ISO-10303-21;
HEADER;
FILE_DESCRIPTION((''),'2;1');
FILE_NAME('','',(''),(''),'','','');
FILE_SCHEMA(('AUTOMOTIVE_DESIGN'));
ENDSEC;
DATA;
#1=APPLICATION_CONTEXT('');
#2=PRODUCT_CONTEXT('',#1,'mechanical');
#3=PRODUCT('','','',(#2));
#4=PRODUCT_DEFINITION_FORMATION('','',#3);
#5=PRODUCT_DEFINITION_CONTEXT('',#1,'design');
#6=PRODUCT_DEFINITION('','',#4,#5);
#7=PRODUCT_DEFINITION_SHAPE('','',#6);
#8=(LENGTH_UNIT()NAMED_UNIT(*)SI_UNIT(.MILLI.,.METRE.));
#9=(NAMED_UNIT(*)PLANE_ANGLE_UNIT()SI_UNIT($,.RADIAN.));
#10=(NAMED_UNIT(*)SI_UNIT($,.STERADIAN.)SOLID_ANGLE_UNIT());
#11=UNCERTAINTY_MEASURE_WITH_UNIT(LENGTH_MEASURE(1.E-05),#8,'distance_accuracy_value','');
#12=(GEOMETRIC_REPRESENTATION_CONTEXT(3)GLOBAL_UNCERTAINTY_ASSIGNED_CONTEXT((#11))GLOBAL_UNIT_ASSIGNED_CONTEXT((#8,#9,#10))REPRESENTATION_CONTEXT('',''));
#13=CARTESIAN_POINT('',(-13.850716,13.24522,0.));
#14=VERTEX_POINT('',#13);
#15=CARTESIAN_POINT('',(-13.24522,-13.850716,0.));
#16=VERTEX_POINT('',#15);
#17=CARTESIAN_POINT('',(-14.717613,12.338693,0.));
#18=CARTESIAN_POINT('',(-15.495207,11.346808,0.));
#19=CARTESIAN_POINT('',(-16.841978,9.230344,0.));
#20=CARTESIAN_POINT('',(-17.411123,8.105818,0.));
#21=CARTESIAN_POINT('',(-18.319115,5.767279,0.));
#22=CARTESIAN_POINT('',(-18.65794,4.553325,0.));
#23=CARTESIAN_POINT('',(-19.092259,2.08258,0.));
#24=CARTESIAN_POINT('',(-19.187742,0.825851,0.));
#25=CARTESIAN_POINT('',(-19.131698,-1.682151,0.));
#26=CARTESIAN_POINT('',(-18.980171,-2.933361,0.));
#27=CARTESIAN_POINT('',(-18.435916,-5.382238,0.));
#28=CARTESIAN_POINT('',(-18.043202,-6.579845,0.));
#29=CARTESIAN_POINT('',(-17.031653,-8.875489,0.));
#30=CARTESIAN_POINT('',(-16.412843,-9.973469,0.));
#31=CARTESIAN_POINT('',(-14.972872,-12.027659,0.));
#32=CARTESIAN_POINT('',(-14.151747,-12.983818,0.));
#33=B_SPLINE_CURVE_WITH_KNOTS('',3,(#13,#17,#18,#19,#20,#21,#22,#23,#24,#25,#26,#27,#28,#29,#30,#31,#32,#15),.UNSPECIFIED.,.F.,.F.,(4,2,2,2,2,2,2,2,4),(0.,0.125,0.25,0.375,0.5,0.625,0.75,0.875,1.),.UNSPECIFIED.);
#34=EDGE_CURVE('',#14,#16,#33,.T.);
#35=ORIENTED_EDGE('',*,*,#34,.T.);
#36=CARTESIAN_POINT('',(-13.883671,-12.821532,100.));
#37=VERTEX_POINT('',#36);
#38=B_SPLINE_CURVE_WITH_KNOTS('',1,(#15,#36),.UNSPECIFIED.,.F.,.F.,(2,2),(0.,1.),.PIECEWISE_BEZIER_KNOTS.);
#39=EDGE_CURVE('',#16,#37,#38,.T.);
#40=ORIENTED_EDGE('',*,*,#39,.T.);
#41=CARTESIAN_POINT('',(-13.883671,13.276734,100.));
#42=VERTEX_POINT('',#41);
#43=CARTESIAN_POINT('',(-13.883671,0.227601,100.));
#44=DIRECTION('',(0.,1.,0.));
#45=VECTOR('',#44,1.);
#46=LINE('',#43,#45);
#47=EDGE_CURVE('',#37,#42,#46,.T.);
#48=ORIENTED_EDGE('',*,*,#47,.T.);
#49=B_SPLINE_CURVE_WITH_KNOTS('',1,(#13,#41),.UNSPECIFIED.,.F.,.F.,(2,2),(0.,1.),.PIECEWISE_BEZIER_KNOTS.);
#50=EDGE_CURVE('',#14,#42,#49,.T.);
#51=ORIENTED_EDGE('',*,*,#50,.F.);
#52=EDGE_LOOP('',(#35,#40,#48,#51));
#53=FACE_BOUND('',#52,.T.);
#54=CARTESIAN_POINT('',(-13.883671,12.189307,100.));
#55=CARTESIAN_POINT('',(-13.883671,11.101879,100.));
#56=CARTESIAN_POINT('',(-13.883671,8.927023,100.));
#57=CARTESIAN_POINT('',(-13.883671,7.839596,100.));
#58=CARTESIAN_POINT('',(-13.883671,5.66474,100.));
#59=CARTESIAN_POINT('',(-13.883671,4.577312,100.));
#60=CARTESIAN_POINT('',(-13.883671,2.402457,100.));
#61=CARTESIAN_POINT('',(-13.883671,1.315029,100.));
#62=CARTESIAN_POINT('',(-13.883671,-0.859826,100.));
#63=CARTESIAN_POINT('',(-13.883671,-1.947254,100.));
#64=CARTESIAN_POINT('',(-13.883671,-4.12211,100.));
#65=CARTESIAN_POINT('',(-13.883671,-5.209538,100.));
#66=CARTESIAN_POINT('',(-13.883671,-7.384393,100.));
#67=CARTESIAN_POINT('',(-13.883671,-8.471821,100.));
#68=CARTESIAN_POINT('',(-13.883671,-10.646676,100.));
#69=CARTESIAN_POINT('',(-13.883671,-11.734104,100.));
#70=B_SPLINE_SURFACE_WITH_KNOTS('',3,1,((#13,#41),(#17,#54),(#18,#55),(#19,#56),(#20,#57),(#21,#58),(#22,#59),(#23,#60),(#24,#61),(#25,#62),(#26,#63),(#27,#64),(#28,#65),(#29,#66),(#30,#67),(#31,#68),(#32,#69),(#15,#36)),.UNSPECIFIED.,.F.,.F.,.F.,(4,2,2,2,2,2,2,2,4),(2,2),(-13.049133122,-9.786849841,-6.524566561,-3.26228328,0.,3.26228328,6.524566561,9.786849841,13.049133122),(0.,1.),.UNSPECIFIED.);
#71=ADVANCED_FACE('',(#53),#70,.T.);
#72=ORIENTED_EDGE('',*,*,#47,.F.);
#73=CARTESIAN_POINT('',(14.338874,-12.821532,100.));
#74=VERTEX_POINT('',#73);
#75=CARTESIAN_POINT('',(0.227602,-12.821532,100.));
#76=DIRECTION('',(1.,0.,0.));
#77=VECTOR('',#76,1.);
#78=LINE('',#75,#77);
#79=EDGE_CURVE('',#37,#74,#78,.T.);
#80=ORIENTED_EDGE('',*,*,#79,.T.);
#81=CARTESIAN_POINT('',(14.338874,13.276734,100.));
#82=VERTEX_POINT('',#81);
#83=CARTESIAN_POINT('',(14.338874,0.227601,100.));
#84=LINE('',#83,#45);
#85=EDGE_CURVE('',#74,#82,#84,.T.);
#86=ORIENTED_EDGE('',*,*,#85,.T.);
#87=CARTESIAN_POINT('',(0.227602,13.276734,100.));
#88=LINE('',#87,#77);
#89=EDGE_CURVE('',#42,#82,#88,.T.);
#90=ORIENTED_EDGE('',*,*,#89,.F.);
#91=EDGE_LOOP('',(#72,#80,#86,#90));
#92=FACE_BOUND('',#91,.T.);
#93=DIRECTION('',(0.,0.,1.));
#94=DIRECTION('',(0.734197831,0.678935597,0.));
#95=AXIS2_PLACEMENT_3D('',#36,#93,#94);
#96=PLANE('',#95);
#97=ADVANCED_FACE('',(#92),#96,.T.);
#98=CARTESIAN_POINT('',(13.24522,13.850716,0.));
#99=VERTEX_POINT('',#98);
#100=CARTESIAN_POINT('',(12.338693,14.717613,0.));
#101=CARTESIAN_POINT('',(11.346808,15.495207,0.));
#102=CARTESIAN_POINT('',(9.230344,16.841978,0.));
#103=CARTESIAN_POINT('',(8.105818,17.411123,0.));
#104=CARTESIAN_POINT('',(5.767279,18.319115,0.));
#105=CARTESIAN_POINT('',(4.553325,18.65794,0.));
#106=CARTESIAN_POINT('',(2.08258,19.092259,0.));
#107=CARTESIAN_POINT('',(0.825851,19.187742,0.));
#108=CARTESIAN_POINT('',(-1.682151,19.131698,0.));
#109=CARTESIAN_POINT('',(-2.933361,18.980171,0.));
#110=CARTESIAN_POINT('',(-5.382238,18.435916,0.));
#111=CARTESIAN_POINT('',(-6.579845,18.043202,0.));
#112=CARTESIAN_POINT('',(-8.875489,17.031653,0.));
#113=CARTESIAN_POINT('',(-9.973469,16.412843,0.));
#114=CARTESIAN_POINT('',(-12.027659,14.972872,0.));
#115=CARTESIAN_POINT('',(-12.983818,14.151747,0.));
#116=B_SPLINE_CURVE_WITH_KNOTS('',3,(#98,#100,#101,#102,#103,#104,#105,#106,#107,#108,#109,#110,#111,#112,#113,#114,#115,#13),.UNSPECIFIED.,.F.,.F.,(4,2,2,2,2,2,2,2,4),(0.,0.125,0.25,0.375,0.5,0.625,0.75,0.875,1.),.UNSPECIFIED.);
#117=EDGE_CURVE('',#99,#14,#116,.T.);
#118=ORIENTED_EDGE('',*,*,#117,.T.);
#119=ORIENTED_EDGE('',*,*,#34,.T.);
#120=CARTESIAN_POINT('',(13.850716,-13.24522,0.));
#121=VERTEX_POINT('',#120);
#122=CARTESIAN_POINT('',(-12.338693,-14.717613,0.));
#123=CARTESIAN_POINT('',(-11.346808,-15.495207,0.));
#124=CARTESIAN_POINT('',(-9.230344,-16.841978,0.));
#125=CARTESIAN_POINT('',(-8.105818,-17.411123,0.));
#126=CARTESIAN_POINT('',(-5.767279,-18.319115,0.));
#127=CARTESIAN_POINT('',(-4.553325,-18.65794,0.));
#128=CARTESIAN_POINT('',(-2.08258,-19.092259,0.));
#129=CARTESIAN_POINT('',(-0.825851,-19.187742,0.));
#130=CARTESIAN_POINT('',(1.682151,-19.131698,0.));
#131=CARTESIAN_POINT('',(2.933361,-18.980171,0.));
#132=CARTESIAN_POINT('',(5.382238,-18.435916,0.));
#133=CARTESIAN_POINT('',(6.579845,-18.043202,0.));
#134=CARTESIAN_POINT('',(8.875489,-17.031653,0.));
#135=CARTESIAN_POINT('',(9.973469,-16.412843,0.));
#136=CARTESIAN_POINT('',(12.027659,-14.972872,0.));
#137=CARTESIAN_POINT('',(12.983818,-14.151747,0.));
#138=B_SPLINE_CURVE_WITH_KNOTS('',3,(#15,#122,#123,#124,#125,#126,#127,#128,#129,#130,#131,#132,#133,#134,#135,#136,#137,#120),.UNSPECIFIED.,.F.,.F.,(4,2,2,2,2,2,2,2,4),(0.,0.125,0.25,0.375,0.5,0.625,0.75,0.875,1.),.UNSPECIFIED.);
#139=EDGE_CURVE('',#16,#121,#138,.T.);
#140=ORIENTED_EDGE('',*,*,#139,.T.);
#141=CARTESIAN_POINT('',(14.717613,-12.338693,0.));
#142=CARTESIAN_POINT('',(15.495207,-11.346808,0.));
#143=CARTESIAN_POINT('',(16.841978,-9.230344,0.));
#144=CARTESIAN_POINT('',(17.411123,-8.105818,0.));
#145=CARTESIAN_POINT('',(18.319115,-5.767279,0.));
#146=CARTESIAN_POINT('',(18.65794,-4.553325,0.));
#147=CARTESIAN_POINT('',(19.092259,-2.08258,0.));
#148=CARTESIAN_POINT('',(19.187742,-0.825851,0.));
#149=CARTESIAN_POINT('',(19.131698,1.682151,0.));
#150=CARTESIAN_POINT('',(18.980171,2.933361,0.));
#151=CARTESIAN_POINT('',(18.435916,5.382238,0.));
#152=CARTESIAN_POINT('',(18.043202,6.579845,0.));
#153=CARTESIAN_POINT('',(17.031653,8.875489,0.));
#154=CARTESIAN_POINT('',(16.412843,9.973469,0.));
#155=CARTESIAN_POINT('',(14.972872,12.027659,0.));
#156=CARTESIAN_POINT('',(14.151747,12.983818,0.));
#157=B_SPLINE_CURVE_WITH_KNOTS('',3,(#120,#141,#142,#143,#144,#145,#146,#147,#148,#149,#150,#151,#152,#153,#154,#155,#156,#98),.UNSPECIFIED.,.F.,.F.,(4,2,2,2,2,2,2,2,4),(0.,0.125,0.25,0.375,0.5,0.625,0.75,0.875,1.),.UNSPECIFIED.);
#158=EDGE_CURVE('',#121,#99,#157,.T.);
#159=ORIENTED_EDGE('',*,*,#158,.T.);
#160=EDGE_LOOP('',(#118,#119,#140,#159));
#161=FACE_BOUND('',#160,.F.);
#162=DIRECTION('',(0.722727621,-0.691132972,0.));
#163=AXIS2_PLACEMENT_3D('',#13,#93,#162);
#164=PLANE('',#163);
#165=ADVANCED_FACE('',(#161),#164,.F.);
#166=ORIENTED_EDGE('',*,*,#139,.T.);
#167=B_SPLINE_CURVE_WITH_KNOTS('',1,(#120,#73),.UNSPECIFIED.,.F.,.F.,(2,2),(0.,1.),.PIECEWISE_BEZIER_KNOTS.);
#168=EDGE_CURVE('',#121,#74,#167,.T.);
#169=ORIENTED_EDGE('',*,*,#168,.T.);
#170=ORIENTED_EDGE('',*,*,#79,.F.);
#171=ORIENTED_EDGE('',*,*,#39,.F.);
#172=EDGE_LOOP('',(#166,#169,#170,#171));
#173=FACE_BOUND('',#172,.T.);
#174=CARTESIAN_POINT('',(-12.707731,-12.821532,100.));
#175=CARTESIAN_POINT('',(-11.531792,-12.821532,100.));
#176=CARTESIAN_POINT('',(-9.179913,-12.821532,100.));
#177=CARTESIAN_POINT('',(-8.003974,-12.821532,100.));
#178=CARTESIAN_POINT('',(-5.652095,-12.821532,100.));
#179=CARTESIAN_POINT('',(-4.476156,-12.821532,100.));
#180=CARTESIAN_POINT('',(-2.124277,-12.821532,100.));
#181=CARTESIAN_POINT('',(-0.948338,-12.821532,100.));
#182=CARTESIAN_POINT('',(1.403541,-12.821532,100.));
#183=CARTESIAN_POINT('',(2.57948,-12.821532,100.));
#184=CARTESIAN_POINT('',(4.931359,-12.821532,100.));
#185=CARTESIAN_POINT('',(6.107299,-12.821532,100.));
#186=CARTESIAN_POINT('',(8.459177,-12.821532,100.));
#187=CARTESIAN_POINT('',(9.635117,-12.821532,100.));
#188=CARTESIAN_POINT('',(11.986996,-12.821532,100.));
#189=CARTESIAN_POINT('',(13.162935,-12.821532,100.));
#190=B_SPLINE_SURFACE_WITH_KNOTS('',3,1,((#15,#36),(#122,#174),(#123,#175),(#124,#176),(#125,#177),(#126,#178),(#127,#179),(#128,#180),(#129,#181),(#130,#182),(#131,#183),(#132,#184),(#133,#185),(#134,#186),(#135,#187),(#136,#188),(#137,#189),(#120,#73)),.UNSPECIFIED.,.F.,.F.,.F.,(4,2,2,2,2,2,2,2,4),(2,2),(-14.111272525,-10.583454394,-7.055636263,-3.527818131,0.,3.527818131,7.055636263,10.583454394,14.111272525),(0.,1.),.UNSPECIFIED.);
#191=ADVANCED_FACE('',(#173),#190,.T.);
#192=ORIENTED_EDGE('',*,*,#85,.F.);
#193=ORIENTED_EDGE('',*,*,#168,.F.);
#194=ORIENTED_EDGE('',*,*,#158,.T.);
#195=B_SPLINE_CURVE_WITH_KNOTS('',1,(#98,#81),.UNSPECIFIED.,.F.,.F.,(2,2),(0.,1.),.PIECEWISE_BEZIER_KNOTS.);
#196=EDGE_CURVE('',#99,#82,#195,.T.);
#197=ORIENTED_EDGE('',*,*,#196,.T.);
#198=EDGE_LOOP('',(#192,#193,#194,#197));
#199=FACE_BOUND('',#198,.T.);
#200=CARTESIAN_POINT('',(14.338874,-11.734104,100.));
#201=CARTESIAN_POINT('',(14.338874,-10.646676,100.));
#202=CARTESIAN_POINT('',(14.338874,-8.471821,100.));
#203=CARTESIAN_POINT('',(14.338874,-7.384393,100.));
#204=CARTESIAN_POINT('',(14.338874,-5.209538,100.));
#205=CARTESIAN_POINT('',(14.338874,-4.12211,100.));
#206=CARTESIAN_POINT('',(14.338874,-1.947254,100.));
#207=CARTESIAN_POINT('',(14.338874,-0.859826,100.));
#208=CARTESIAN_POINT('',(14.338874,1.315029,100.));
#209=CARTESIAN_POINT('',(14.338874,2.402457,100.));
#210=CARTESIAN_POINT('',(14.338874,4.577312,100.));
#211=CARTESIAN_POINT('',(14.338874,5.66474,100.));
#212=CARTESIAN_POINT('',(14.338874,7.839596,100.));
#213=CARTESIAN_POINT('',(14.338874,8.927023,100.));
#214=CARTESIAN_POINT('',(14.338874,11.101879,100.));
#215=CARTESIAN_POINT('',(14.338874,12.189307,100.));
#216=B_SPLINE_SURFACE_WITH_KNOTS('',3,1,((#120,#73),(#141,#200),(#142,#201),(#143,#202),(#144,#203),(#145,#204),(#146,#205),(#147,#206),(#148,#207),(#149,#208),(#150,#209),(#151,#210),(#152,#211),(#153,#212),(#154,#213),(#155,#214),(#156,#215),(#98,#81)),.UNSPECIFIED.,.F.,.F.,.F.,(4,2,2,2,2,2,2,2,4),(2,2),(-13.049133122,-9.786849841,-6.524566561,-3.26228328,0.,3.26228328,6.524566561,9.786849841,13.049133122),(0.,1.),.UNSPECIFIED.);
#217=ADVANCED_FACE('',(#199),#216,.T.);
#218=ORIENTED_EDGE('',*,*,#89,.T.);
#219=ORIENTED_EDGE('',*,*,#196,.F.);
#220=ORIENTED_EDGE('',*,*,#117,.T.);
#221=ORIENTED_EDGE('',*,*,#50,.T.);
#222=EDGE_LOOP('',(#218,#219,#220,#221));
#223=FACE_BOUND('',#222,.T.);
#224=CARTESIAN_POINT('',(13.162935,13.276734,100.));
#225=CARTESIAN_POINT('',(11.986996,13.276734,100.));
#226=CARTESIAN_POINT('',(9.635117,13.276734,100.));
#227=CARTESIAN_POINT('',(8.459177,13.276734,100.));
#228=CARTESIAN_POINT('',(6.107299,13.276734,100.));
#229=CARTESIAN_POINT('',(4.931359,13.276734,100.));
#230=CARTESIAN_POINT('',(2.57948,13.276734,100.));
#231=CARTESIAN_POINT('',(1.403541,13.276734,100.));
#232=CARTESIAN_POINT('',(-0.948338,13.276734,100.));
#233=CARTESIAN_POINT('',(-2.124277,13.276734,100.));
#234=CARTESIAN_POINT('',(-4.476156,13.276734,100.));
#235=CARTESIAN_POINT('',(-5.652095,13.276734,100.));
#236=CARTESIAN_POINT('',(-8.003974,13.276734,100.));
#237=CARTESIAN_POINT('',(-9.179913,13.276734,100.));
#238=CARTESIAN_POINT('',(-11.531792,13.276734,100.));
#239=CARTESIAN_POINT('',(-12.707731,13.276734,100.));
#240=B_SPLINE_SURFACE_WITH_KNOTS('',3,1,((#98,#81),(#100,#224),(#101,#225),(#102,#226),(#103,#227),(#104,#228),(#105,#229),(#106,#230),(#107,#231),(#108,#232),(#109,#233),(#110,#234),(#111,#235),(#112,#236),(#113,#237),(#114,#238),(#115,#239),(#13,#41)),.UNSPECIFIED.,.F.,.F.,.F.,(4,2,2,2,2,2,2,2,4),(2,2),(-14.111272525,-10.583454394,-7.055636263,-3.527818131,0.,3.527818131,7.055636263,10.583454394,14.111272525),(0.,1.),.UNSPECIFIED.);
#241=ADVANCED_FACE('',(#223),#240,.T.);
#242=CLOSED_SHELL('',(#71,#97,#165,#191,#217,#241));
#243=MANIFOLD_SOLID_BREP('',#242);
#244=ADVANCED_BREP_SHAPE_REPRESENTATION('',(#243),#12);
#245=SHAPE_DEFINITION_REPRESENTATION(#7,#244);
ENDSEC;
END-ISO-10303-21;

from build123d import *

# Parameters (mm, degrees)
F1_W = 28.2225450501
F1_H = 26.0982662439


# Not quite as in the source:
# - the arcs of a loft's sections are written as splines that run evenly, so that the points pair up as in the source's solid


with BuildPart() as f3:
    # F2 (on Top) → F3 section 0
    with BuildSketch(Plane.XY):
        with BuildLine():
            add(Edge.make_bspline(
                [(-13.8507158187, 13.2452200706), (-14.7176134451, 12.3386928401), (-15.4952067044, 11.3468081727), (-16.8419781891, 9.2303443707), (-17.4111231128, 8.1058175697), (-18.3191151563, 5.7672789435), (-18.6579398242, 4.5533249433), (-19.0922588016, 2.0825802209), (-19.1877423716, 0.8258505928), (-19.1316976481, -1.6821508917), (-18.9801707404, -2.9333607328), (-18.4359160833, -5.3822378889), (-18.0432017917, -6.5798446505), (-17.0316526023, -8.8754885024), (-16.412842717, -9.9734688283), (-14.9728722633, -12.0276590702), (-14.151747301, -12.9838181922), (-13.2452200706, -13.8507158187)],
                knots=[0, 0, 0, 0, 0.125, 0.125, 0.25, 0.25, 0.375, 0.375, 0.5, 0.5, 0.625, 0.625, 0.75, 0.75, 0.875, 0.875, 1, 1, 1, 1], degree=3))
            add(Edge.make_bspline(
                [(-13.2452200706, -13.8507158187), (-12.3386928401, -14.7176134451), (-11.3468081727, -15.4952067044), (-9.2303443707, -16.8419781891), (-8.1058175697, -17.4111231128), (-5.7672789435, -18.3191151563), (-4.5533249433, -18.6579398242), (-2.0825802209, -19.0922588016), (-0.8258505928, -19.1877423716), (1.6821508917, -19.1316976481), (2.9333607328, -18.9801707404), (5.3822378889, -18.4359160833), (6.5798446505, -18.0432017917), (8.8754885024, -17.0316526023), (9.9734688283, -16.412842717), (12.0276590702, -14.9728722633), (12.9838181922, -14.151747301), (13.8507158187, -13.2452200706)],
                knots=[0, 0, 0, 0, 0.125, 0.125, 0.25, 0.25, 0.375, 0.375, 0.5, 0.5, 0.625, 0.625, 0.75, 0.75, 0.875, 0.875, 1, 1, 1, 1], degree=3))
            add(Edge.make_bspline(
                [(13.8507158187, -13.2452200706), (14.7176134451, -12.3386928401), (15.4952067044, -11.3468081727), (16.8419781891, -9.2303443707), (17.4111231128, -8.1058175697), (18.3191151563, -5.7672789435), (18.6579398242, -4.5533249433), (19.0922588016, -2.0825802209), (19.1877423716, -0.8258505928), (19.1316976481, 1.6821508917), (18.9801707404, 2.9333607328), (18.4359160833, 5.3822378889), (18.0432017917, 6.5798446505), (17.0316526023, 8.8754885024), (16.412842717, 9.9734688283), (14.9728722633, 12.0276590702), (14.151747301, 12.9838181922), (13.2452200706, 13.8507158187)],
                knots=[0, 0, 0, 0, 0.125, 0.125, 0.25, 0.25, 0.375, 0.375, 0.5, 0.5, 0.625, 0.625, 0.75, 0.75, 0.875, 0.875, 1, 1, 1, 1], degree=3))
            add(Edge.make_bspline(
                [(13.2452200706, 13.8507158187), (12.3386928401, 14.7176134451), (11.3468081727, 15.4952067044), (9.2303443707, 16.8419781891), (8.1058175697, 17.4111231128), (5.7672789435, 18.3191151563), (4.5533249433, 18.6579398242), (2.0825802209, 19.0922588016), (0.8258505928, 19.1877423716), (-1.6821508917, 19.1316976481), (-2.9333607328, 18.9801707404), (-5.3822378889, 18.4359160833), (-6.5798446505, 18.0432017917), (-8.8754885024, 17.0316526023), (-9.9734688283, 16.412842717), (-12.0276590702, 14.9728722633), (-12.9838181922, 14.151747301), (-13.8507158187, 13.2452200706)],
                knots=[0, 0, 0, 0, 0.125, 0.125, 0.25, 0.25, 0.375, 0.375, 0.5, 0.5, 0.625, 0.625, 0.75, 0.75, 0.875, 0.875, 1, 1, 1, 1], degree=3))
        make_face()
    # F1 (on offset) → F3 section 1
    with BuildSketch(Plane.XY.offset(100)):
        with Locations((0.2276017331, 0.2276012674)):
            Rectangle(F1_W, F1_H)
    loft(ruled=True)


solid = f3.part
